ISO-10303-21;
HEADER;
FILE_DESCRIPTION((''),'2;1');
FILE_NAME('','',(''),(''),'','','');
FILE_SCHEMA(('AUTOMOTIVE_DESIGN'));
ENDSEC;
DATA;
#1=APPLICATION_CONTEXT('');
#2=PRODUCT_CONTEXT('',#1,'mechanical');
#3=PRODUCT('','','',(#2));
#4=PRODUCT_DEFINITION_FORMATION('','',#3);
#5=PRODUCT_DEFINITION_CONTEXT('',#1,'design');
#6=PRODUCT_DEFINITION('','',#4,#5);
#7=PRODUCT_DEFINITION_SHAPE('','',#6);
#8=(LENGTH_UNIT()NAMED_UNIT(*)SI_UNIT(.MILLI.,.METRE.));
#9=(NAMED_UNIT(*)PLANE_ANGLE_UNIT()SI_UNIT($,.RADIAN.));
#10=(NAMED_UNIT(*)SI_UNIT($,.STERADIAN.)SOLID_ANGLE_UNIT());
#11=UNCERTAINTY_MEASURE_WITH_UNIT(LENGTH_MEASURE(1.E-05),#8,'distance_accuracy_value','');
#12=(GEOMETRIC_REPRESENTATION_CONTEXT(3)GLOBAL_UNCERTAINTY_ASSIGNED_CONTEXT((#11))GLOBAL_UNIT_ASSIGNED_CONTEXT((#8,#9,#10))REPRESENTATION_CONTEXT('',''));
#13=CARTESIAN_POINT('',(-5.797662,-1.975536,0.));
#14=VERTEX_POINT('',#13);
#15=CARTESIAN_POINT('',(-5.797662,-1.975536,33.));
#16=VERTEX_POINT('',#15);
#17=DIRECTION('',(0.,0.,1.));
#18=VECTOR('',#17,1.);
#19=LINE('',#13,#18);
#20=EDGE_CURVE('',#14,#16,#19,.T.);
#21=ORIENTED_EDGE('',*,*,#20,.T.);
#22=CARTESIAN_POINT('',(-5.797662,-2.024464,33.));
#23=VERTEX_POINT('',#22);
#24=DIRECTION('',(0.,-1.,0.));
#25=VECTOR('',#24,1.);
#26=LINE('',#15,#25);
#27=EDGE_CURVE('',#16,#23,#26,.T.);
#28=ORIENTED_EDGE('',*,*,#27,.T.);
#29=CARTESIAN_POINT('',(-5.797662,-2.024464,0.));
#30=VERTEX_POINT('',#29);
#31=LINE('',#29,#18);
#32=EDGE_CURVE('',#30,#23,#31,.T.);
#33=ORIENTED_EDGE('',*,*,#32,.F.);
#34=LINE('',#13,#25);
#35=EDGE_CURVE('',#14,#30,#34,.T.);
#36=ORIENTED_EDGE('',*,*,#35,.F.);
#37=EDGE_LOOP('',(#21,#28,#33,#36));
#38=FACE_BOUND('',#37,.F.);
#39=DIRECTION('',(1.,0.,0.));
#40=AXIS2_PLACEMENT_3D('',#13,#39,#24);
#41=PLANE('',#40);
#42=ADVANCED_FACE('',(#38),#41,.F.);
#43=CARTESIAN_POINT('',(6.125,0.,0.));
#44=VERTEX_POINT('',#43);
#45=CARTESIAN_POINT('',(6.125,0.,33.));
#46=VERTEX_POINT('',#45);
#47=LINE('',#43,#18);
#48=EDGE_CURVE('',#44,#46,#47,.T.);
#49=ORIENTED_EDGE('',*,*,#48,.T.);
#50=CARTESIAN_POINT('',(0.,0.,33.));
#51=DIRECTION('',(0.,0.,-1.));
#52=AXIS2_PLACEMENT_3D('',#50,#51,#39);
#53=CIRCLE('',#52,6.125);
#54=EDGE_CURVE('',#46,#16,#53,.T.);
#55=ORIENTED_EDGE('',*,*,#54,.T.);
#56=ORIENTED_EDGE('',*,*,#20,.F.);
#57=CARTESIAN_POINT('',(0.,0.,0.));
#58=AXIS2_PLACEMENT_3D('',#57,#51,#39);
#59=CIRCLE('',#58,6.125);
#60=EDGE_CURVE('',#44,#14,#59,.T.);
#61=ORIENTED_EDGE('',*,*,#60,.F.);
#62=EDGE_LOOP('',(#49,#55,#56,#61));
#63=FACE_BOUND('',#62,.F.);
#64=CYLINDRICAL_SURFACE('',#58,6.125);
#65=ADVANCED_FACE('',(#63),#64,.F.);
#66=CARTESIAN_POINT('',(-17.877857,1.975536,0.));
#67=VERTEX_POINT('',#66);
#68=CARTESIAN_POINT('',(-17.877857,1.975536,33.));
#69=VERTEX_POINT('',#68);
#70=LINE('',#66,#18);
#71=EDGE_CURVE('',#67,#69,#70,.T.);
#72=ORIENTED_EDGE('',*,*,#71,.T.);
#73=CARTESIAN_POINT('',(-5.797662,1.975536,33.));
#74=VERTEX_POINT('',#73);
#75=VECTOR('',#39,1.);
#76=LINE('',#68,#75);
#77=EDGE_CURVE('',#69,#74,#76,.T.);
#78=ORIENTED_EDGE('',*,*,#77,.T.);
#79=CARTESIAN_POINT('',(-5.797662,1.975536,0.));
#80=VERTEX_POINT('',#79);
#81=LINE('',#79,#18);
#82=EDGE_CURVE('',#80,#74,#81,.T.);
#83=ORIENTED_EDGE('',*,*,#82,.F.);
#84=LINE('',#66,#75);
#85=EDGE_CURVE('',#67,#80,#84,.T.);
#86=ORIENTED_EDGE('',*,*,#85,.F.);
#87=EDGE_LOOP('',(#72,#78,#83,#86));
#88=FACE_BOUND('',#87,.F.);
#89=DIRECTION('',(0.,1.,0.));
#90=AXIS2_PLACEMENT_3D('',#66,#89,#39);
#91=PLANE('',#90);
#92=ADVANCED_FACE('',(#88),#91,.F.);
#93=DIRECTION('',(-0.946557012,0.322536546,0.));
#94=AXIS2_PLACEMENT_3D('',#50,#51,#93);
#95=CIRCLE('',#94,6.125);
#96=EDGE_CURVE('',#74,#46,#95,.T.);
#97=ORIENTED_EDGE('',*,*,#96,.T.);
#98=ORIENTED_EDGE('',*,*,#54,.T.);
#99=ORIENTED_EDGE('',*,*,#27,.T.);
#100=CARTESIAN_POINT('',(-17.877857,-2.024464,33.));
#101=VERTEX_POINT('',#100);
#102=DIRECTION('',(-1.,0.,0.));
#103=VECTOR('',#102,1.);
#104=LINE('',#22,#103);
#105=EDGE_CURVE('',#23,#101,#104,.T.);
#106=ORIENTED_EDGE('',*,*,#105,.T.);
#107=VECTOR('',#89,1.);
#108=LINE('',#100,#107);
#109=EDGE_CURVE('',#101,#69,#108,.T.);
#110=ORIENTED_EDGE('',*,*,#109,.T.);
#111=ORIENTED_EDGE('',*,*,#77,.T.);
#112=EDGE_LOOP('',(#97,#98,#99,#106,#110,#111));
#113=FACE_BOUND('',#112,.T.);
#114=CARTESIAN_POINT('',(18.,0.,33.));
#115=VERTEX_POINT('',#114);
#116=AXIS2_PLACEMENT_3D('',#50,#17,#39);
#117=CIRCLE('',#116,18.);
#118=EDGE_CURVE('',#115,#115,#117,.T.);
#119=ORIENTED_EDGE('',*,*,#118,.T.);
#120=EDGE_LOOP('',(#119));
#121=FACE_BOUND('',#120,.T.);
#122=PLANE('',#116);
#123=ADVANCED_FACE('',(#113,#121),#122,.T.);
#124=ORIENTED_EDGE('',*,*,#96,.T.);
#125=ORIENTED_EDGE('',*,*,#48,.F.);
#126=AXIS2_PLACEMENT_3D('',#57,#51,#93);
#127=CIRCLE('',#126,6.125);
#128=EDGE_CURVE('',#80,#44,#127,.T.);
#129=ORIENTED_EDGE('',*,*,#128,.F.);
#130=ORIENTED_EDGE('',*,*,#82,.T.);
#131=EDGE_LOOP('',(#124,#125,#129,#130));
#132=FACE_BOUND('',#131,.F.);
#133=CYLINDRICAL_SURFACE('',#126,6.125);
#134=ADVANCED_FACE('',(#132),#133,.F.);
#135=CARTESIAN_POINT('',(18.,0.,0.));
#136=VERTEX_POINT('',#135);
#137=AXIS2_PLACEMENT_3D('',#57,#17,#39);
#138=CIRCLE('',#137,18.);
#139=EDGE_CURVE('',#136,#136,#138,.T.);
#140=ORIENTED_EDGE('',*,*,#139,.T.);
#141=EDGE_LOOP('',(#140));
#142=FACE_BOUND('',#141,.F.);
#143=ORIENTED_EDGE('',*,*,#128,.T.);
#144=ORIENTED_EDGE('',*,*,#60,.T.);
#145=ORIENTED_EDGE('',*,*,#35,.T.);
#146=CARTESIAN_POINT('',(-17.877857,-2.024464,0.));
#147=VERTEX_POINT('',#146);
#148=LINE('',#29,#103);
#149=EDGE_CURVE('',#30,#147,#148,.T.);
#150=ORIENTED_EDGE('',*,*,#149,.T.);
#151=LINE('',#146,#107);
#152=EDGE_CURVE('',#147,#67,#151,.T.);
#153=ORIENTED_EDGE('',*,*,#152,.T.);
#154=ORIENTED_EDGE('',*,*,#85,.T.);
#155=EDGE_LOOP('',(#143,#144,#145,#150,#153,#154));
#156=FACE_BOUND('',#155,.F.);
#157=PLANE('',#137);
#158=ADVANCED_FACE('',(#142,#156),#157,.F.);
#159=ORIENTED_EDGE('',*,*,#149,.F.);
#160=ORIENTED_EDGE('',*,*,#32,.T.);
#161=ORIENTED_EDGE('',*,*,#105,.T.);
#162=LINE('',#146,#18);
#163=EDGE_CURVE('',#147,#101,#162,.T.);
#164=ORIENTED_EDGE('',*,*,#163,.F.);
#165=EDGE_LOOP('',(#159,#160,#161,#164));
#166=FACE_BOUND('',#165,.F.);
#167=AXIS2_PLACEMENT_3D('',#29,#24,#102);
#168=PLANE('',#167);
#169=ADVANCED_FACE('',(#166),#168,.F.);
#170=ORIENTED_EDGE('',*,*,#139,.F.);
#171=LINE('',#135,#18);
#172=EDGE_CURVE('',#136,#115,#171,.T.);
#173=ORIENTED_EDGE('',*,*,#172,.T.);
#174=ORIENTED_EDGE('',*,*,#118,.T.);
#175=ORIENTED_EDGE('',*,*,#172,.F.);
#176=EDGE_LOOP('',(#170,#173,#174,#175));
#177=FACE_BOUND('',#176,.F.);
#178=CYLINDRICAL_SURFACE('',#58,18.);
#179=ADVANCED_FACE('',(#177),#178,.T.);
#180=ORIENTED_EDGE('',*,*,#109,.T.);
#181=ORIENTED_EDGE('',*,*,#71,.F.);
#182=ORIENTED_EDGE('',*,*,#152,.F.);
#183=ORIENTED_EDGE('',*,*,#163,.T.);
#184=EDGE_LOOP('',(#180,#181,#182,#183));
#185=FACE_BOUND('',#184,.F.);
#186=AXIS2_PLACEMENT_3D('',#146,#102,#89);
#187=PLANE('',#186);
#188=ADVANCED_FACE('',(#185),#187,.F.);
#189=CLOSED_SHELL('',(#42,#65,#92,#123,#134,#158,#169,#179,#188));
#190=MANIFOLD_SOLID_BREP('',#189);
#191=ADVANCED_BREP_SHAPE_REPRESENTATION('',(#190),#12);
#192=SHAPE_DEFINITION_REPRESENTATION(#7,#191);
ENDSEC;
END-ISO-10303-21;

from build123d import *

# Parameters (mm, degrees)
F0_R     = 18
F1_DEPTH = 33


with BuildPart() as f1:
    # F0 (on Top) → F1 (new body)
    with BuildSketch(Plane.XY):
        Circle(F0_R)
        with BuildLine():
            ThreePointArc((-5.7976616963, 1.9755363461), (1.0012360136, 6.0426113101), (6.125, 0))
            ThreePointArc((6.125, 0), (1.0012360136, -6.0426113101), (-5.7976616963, -1.9755363461))
            Line((-5.7976616963, -1.9755363461), (-5.7976616963, -2.0244636539))
            Line((-5.7976616963, -2.0244636539), (-17.8778566858, -2.0244636539))
            Line((-17.8778566858, -2.0244636539), (-17.8778566858, 1.9755363461))
            Line((-17.8778566858, 1.9755363461), (-5.7976616963, 1.9755363461))
        make_face(mode=Mode.SUBTRACT)
    extrude(amount=F1_DEPTH)


solid = f1.part
